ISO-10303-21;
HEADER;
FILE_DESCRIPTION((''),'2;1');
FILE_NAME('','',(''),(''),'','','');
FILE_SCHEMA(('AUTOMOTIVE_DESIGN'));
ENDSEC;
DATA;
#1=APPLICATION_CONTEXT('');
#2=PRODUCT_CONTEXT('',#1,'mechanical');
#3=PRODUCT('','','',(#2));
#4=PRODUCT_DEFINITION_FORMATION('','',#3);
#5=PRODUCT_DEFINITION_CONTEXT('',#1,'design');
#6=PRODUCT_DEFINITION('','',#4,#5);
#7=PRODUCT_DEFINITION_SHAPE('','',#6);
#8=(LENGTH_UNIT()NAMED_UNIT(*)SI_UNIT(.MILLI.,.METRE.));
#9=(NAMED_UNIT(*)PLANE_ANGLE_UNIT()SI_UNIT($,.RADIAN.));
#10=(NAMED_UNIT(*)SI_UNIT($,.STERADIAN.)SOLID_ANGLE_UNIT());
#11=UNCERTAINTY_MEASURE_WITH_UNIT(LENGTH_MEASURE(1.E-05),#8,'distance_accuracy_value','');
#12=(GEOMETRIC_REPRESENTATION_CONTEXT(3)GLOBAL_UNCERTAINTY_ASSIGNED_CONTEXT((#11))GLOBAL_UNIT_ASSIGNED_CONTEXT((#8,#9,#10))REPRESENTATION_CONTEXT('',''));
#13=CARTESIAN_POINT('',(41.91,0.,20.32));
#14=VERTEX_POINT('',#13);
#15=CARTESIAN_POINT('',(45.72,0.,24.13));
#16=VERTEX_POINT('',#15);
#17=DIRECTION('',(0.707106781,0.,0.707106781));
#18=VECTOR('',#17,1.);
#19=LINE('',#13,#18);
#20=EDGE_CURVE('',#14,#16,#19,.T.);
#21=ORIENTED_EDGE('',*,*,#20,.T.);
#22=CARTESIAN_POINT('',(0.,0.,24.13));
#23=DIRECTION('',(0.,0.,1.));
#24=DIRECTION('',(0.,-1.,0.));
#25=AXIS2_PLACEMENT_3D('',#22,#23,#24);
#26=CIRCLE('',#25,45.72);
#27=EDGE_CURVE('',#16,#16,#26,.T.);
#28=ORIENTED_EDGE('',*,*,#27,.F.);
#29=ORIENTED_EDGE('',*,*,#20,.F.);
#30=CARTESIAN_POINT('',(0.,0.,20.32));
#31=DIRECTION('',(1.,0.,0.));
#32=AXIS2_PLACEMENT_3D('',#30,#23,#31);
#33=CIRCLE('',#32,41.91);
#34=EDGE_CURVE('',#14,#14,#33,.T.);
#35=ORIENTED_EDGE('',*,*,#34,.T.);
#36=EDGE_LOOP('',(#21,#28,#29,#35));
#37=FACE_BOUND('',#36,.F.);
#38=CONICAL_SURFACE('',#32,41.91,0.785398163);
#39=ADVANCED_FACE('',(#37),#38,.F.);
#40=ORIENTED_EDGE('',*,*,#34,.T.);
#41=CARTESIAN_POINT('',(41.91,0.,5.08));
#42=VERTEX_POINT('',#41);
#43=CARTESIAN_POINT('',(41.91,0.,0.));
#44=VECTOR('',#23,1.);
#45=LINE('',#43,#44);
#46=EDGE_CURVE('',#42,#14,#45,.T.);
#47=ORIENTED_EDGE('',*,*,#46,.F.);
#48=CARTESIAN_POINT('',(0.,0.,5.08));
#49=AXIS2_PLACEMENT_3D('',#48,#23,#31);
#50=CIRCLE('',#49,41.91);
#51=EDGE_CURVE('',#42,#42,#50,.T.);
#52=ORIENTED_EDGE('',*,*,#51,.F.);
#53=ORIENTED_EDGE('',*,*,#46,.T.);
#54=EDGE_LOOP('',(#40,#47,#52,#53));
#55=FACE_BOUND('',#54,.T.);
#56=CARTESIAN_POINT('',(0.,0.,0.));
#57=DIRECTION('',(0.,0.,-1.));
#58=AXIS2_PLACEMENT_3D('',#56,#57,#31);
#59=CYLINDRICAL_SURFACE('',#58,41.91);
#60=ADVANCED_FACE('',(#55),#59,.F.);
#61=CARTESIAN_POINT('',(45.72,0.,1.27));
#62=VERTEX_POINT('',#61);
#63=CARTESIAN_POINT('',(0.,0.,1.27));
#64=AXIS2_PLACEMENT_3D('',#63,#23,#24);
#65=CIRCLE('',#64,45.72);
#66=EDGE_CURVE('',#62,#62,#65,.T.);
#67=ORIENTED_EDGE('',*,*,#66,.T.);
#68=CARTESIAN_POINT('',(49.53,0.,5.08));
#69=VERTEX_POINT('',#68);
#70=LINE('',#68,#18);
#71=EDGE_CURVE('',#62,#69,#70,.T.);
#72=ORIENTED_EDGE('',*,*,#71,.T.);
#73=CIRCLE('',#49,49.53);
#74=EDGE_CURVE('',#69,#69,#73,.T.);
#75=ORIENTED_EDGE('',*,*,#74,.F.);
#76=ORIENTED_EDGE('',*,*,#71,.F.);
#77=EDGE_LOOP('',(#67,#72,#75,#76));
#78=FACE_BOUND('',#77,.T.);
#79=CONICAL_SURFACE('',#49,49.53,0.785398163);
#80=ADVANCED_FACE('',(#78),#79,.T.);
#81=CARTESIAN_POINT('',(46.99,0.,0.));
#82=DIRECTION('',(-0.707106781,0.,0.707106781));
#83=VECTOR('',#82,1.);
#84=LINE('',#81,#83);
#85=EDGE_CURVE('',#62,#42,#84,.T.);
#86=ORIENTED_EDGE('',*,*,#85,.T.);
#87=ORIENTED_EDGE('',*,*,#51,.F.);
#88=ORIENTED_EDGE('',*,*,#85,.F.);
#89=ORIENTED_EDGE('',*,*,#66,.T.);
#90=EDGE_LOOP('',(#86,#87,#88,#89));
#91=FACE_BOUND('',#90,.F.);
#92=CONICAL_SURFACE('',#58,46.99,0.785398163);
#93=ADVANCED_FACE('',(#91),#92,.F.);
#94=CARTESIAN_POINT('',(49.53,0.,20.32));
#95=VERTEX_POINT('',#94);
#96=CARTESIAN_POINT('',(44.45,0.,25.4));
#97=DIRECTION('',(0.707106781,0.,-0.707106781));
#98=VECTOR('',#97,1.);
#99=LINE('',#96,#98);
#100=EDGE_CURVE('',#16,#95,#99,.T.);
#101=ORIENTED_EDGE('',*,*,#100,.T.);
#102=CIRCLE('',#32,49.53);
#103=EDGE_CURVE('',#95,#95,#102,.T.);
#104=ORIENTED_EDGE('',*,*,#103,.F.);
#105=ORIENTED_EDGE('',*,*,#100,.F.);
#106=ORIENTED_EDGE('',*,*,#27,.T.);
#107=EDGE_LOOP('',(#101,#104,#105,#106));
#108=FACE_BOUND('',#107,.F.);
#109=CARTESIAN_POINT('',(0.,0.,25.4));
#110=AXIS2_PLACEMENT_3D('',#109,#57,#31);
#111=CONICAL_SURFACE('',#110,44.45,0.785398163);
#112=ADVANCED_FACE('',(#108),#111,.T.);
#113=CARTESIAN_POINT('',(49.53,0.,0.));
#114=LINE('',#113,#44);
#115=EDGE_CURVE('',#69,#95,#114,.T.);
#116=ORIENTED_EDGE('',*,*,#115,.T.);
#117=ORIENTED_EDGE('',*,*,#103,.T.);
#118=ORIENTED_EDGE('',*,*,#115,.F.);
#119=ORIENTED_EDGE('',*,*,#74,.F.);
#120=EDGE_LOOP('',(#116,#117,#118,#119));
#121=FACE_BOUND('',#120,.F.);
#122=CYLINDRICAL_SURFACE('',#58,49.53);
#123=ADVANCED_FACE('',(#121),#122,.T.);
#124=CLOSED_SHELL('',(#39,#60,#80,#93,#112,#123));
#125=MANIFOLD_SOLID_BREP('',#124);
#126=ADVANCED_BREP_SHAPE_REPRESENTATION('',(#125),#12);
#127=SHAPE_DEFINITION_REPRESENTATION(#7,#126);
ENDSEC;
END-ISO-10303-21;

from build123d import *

# Parameters (mm, degrees)
F0_R     = 49.53
F0_R_2   = 41.91
F1_DEPTH = 25.4
F2_SIZE  = 5.08
F4_SIZE  = 5.08


# Not quite as in the source:
# - a fillet or chamfer that OpenCascade refuses, or shapes differently, is made with other operations: its cross-section is extruded or revolved along the edge and cut away or added


with BuildPart() as f1:
    # F0 (on Top) → F1 (new body)
    with BuildSketch(Plane.XY):
        Circle(F0_R)
        Circle(F0_R_2, mode=Mode.SUBTRACT)
    extrude(amount=F1_DEPTH)

    # F2
    f2_edges = [f1.edges().sort_by_distance(p)[0] for p in [
        (-41.91, 0, 25.4),
    ]]
    chamfer(f2_edges, length=F2_SIZE)

    # F3: chamfer of 5.08 on 1 edges, made by hand

    # F3_s1 → F3_t2 (revolve, cut)
    with BuildSketch(Plane.XZ):
        Polygon((44.45, 25.4), (49.53, 20.32), (49.53, 25.4), align=None)
    revolve(axis=Axis((0, 0, 25.4), (0, 0, 1)), mode=Mode.SUBTRACT)

    # F4
    f4_edges = [f1.edges().sort_by_distance(p)[0] for p in [
        (-49.53, 0, 0),
    ]]
    chamfer(f4_edges, length=F4_SIZE)

    # F5: chamfer of 5.08 on 1 edges, made by hand

    # F5_s1 → F5_t2 (revolve, cut)
    with BuildSketch(Plane.XZ):
        Polygon((46.99, 0), (41.91, 5.08), (41.91, 0), align=None)
    revolve(axis=Axis((0, 0, 0), (0, 0, 1)), mode=Mode.SUBTRACT)


solid = f1.part
